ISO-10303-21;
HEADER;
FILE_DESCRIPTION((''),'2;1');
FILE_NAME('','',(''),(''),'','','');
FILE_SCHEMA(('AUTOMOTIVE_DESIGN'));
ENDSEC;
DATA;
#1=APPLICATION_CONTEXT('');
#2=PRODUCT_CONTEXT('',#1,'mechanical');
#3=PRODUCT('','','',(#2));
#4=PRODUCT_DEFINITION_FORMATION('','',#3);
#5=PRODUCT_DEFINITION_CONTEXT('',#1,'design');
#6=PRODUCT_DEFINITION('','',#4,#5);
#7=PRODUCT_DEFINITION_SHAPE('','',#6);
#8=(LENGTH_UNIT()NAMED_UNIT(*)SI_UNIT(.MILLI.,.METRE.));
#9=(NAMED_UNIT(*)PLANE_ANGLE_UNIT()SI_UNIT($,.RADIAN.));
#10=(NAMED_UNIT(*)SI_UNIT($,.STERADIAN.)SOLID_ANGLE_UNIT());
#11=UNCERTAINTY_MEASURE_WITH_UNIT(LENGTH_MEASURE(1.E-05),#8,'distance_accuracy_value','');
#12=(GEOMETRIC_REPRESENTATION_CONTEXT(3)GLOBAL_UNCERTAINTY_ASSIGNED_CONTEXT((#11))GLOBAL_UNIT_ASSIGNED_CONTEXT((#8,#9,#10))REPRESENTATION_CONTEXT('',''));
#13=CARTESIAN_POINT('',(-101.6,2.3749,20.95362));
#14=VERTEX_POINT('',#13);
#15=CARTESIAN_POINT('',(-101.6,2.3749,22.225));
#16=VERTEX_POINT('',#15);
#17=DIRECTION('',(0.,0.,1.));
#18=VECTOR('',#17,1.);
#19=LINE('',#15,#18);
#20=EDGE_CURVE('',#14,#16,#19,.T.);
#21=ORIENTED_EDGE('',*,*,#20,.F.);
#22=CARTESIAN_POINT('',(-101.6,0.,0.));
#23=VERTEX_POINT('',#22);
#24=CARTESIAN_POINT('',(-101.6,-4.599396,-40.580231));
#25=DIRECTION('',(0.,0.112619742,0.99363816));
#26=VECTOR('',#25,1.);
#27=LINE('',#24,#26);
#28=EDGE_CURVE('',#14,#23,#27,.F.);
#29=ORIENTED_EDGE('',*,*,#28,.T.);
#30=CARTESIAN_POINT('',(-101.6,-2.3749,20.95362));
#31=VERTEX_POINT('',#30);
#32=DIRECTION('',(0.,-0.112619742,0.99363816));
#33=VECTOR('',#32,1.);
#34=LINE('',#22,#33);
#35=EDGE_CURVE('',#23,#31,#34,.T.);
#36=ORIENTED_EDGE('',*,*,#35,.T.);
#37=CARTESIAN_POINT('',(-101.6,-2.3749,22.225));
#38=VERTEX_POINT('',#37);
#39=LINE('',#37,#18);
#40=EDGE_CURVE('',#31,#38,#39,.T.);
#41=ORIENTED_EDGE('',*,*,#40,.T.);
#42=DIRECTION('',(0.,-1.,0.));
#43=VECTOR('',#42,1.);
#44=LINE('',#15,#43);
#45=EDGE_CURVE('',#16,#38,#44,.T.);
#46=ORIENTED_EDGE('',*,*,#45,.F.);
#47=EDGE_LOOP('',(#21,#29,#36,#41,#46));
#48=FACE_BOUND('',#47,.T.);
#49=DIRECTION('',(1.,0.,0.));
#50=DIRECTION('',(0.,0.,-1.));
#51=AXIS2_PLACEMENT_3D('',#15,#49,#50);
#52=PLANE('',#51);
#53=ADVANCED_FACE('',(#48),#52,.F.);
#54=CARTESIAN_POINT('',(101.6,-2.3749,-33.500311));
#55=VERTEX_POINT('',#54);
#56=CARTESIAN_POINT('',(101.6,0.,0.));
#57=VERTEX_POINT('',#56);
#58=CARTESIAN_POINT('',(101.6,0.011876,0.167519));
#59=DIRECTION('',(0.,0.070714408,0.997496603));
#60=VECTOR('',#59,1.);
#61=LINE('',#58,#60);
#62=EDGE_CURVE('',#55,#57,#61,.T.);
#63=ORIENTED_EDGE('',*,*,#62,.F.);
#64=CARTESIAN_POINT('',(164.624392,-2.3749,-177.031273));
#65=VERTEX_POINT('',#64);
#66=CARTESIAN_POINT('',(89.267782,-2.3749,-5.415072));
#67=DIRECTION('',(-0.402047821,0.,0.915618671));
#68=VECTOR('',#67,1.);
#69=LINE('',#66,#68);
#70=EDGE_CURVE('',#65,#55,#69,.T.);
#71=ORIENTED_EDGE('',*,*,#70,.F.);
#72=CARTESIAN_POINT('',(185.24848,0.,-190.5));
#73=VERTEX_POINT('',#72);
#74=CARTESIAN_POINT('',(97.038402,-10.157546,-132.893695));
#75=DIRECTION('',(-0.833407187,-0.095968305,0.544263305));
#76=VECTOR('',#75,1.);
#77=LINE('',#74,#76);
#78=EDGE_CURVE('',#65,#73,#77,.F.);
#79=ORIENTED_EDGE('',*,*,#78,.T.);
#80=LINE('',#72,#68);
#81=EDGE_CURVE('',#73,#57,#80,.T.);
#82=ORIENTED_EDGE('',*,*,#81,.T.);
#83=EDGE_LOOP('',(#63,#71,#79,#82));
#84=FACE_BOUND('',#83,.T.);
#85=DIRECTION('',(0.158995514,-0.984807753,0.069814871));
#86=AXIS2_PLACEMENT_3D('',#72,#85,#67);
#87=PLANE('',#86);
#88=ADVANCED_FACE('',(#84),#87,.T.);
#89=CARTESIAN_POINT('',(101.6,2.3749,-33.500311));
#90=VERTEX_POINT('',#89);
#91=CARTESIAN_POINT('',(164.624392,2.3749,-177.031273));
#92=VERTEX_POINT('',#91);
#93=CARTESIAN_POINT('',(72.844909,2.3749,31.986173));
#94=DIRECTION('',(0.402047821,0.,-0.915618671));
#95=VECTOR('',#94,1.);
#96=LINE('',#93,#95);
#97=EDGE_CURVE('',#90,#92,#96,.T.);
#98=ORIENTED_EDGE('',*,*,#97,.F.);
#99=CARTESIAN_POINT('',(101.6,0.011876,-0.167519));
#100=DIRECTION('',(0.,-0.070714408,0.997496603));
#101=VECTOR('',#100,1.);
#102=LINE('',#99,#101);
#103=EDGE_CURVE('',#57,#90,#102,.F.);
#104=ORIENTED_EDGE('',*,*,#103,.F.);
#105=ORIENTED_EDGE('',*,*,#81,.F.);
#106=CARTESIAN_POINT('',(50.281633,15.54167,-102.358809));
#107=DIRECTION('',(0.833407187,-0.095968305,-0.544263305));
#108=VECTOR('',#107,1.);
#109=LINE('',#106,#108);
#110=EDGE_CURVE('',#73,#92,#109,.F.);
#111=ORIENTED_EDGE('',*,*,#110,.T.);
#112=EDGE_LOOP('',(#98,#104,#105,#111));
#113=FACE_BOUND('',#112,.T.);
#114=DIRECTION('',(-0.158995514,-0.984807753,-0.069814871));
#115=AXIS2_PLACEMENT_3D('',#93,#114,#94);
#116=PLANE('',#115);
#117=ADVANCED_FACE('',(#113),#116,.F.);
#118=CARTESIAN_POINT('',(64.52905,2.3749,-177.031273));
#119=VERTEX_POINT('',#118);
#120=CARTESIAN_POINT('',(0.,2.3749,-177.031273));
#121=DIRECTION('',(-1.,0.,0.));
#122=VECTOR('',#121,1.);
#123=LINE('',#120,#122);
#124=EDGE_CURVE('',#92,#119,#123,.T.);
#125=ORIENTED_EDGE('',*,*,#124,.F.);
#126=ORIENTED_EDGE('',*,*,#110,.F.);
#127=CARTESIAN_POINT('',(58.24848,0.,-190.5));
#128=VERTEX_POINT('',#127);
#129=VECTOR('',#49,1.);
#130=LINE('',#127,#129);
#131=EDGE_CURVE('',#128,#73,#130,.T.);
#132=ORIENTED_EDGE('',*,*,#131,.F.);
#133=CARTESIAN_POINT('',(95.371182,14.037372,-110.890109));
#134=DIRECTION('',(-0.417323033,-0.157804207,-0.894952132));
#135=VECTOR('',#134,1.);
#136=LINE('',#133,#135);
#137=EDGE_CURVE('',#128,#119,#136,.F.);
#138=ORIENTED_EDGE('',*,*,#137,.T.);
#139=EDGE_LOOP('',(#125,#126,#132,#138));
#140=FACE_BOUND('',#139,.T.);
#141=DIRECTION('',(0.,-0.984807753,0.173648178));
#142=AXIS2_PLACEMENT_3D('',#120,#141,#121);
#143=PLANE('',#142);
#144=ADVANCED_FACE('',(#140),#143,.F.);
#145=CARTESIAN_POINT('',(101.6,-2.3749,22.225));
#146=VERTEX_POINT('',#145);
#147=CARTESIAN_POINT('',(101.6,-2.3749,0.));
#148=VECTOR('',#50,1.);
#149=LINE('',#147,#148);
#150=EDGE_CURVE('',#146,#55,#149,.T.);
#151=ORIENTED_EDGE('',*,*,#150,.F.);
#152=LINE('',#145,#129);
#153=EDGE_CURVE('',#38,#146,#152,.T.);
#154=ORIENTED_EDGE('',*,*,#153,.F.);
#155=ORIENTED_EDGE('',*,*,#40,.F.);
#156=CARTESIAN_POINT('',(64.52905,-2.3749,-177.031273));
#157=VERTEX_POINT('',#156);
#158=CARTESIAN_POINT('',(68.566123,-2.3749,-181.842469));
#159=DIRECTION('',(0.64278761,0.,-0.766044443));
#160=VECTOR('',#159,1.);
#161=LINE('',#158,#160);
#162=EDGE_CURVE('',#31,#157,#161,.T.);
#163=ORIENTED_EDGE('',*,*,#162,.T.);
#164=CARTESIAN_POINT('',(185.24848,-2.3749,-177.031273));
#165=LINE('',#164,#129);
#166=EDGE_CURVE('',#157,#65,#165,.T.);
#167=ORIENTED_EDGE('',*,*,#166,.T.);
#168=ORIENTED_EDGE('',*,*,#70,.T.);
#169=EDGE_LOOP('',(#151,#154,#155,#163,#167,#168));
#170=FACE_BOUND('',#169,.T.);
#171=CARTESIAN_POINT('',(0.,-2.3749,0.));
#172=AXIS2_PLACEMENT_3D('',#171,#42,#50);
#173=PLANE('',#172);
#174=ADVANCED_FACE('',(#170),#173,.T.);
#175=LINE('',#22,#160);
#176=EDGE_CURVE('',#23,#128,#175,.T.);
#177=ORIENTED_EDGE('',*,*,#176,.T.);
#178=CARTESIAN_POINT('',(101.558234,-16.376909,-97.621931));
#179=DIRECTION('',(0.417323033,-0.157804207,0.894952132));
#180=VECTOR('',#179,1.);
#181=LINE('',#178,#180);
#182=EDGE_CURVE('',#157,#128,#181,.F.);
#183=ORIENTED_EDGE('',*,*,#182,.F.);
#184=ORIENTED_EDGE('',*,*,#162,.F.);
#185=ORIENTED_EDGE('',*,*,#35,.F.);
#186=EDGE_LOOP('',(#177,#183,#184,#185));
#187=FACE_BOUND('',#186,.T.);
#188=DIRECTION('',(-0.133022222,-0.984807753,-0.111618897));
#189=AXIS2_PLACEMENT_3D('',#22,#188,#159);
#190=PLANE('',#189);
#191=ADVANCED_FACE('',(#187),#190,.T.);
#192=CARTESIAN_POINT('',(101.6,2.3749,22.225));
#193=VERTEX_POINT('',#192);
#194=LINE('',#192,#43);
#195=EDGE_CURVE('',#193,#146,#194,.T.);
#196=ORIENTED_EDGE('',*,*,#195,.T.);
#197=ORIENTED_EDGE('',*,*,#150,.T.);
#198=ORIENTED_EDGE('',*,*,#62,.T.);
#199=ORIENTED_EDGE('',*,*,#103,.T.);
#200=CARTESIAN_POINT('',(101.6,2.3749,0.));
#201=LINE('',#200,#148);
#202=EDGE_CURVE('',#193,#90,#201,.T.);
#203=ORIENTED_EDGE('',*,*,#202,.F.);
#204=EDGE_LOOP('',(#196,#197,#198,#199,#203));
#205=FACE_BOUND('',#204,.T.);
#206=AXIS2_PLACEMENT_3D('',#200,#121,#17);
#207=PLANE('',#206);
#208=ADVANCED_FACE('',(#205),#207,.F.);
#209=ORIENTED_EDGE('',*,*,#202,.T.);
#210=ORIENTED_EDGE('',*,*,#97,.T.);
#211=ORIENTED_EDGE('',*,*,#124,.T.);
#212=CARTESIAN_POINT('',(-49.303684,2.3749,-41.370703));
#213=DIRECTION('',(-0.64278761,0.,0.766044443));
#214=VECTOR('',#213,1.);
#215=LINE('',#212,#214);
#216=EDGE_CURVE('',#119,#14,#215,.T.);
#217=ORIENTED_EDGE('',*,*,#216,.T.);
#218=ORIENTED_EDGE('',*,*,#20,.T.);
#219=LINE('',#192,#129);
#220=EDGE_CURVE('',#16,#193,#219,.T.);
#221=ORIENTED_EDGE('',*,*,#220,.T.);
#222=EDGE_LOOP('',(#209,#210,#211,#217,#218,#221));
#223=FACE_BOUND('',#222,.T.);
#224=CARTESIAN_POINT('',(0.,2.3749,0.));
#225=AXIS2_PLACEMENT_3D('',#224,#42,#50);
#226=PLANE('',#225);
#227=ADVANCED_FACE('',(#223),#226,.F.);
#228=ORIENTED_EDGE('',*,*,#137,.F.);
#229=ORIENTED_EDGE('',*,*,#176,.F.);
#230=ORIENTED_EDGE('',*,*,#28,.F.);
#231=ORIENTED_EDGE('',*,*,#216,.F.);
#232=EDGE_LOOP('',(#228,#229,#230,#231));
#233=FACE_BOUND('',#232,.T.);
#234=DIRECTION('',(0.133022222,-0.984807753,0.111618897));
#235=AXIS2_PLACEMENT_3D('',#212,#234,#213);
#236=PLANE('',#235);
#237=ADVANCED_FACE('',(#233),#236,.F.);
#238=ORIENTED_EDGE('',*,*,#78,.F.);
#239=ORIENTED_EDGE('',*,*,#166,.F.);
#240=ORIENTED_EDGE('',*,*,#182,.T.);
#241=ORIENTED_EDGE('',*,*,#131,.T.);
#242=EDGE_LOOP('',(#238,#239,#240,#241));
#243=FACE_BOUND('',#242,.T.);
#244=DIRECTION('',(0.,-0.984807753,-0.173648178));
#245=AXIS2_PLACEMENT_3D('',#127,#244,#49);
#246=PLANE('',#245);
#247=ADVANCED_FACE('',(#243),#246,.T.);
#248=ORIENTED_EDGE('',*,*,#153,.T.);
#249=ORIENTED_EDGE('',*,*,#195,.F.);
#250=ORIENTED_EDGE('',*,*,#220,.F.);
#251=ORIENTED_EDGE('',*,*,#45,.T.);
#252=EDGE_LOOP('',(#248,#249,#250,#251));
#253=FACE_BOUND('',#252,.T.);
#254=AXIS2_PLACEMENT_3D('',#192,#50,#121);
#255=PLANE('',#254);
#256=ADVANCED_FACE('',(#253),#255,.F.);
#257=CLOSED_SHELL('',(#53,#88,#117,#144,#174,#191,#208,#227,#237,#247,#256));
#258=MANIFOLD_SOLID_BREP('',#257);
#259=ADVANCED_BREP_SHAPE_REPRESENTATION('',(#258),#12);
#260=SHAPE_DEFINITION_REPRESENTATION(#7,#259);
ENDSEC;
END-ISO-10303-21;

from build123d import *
from OCP.BRepFilletAPI import BRepFilletAPI_MakeChamfer

# Parameters (mm, degrees)
BOSS_EXTRUDE1_DEPTH = 2.3749
CHAMFER1_SIZE       = 2.3749
CHAMFER1_SIZE2      = 13.468727193
CHAMFER2_SIZE       = 2.3749
CHAMFER2_SIZE_2     = 13.468727193


with BuildPart() as part:
    # Sketch1 → Boss-Extrude1 (new, symmetric)
    with BuildSketch(Plane(origin=(0, 0, 0), x_dir=(1, 0, 0), z_dir=(0, 1, 0))):
        Polygon((-101.6, 0), (58.248479739, 190.5), (185.248479739, 190.5), (101.6, 0), (101.6, -22.225), (-101.6, -22.225), align=None)
    extrude(amount=BOSS_EXTRUDE1_DEPTH, both=True)

    # Chamfer1: one chamfer whose edges measure the first distance from different faces: ONE call of the kernel's chamfer builder (chamfer() names one face for all edges)
    chamfer1_edges_1 = [part.edges().sort_by_distance(p)[0] for p in [
        (121.748479739, 2.3749, -190.5),
    ]]
    chamfer1_side_1 = [part.faces().sort_by_distance(p)[0] for p in [
        (121.748479739, 0, -190.5),
    ]]
    chamfer1_edges_2 = [part.edges().sort_by_distance(p)[0] for p in [
        (-21.67576013, 2.3749, -95.25),
    ]]
    chamfer1_side_2 = [part.faces().sort_by_distance(p)[0] for p in [
        (-21.67576013, 0, -95.25),
    ]]
    chamfer1_edges_3 = [part.edges().sort_by_distance(p)[0] for p in [
        (143.42423987, 2.3749, -95.25),
    ]]
    chamfer1_side_3 = [part.faces().sort_by_distance(p)[0] for p in [
        (143.42423987, 0, -95.25),
    ]]
    chamfer1 = BRepFilletAPI_MakeChamfer(part.part.solid().wrapped)
    for e in chamfer1_edges_1:
        chamfer1.Add(CHAMFER1_SIZE, CHAMFER1_SIZE2, e.wrapped, chamfer1_side_1[0].wrapped)  # the first distance lies on this face
    for e in chamfer1_edges_2:
        chamfer1.Add(CHAMFER1_SIZE, CHAMFER1_SIZE2, e.wrapped, chamfer1_side_2[0].wrapped)  # the first distance lies on this face
    for e in chamfer1_edges_3:
        chamfer1.Add(CHAMFER1_SIZE, CHAMFER1_SIZE2, e.wrapped, chamfer1_side_3[0].wrapped)  # the first distance lies on this face
    add(Compound.cast(chamfer1.Shape()), mode=Mode.REPLACE)

    # Chamfer2
    # the kernel refuses this chamfer: 13.468727193, 2.3749 mm, written as the material it takes off along each edge
    with BuildSketch(Plane(origin=(199.319755492, -2.3749, -222.545747147), x_dir=(0.19240697277850308, 0.9776715712462557, 0.08448583078297824), z_dir=(-0.40204782056593685, 0, 0.9156186706146726))) as chamfer2_piece_1_section:
        Polygon((CHAMFER2_SIZE * 0.977671571246, CHAMFER2_SIZE * 0.210138760767), (-CHAMFER2_SIZE_2 * 0.210138760774, CHAMFER2_SIZE_2 * 0.977671571276), (0, 0), align=None)
    chamfer2_piece_1 = extrude(amount=278.054066026, mode=Mode.PRIVATE)
    chamfer2_piece_1 = split(chamfer2_piece_1, bisect_by=Plane(origin=(101.6, -1.721128259, -118.063928537), z_dir=(1, 0, 0)), keep=Keep.TOP, mode=Mode.PRIVATE)
    add(chamfer2_piece_1, mode=Mode.SUBTRACT)
    with BuildSketch(Plane(origin=(-124.096930076, -2.3749, 26.81079724), x_dir=(-0.1609756299698045, 0.9776715712462571, -0.13507459173619368), z_dir=(0.6427876096865406, 0, -0.7660444431189771))) as chamfer2_piece_2:
        Polygon((CHAMFER2_SIZE * 0.977671571246, CHAMFER2_SIZE * 0.210138760767), (-CHAMFER2_SIZE_2 * 0.210138760774, CHAMFER2_SIZE_2 * 0.977671571276), (0, 0), align=None)
    extrude(amount=318.678108919, mode=Mode.SUBTRACT)
    with BuildSketch(Plane(origin=(23.249469589, -2.3749, -190.5), x_dir=(0, 0.977671571246258, -0.21013876076743496), z_dir=(1, 0, 0))) as chamfer2_piece_3:
        Polygon((CHAMFER2_SIZE * 0.977671571246, CHAMFER2_SIZE * 0.210138760767), (-CHAMFER2_SIZE_2 * 0.210138760774, CHAMFER2_SIZE_2 * 0.977671571276), (0, 0), align=None)
    extrude(amount=196.998020301, mode=Mode.SUBTRACT)


solid = part.part
